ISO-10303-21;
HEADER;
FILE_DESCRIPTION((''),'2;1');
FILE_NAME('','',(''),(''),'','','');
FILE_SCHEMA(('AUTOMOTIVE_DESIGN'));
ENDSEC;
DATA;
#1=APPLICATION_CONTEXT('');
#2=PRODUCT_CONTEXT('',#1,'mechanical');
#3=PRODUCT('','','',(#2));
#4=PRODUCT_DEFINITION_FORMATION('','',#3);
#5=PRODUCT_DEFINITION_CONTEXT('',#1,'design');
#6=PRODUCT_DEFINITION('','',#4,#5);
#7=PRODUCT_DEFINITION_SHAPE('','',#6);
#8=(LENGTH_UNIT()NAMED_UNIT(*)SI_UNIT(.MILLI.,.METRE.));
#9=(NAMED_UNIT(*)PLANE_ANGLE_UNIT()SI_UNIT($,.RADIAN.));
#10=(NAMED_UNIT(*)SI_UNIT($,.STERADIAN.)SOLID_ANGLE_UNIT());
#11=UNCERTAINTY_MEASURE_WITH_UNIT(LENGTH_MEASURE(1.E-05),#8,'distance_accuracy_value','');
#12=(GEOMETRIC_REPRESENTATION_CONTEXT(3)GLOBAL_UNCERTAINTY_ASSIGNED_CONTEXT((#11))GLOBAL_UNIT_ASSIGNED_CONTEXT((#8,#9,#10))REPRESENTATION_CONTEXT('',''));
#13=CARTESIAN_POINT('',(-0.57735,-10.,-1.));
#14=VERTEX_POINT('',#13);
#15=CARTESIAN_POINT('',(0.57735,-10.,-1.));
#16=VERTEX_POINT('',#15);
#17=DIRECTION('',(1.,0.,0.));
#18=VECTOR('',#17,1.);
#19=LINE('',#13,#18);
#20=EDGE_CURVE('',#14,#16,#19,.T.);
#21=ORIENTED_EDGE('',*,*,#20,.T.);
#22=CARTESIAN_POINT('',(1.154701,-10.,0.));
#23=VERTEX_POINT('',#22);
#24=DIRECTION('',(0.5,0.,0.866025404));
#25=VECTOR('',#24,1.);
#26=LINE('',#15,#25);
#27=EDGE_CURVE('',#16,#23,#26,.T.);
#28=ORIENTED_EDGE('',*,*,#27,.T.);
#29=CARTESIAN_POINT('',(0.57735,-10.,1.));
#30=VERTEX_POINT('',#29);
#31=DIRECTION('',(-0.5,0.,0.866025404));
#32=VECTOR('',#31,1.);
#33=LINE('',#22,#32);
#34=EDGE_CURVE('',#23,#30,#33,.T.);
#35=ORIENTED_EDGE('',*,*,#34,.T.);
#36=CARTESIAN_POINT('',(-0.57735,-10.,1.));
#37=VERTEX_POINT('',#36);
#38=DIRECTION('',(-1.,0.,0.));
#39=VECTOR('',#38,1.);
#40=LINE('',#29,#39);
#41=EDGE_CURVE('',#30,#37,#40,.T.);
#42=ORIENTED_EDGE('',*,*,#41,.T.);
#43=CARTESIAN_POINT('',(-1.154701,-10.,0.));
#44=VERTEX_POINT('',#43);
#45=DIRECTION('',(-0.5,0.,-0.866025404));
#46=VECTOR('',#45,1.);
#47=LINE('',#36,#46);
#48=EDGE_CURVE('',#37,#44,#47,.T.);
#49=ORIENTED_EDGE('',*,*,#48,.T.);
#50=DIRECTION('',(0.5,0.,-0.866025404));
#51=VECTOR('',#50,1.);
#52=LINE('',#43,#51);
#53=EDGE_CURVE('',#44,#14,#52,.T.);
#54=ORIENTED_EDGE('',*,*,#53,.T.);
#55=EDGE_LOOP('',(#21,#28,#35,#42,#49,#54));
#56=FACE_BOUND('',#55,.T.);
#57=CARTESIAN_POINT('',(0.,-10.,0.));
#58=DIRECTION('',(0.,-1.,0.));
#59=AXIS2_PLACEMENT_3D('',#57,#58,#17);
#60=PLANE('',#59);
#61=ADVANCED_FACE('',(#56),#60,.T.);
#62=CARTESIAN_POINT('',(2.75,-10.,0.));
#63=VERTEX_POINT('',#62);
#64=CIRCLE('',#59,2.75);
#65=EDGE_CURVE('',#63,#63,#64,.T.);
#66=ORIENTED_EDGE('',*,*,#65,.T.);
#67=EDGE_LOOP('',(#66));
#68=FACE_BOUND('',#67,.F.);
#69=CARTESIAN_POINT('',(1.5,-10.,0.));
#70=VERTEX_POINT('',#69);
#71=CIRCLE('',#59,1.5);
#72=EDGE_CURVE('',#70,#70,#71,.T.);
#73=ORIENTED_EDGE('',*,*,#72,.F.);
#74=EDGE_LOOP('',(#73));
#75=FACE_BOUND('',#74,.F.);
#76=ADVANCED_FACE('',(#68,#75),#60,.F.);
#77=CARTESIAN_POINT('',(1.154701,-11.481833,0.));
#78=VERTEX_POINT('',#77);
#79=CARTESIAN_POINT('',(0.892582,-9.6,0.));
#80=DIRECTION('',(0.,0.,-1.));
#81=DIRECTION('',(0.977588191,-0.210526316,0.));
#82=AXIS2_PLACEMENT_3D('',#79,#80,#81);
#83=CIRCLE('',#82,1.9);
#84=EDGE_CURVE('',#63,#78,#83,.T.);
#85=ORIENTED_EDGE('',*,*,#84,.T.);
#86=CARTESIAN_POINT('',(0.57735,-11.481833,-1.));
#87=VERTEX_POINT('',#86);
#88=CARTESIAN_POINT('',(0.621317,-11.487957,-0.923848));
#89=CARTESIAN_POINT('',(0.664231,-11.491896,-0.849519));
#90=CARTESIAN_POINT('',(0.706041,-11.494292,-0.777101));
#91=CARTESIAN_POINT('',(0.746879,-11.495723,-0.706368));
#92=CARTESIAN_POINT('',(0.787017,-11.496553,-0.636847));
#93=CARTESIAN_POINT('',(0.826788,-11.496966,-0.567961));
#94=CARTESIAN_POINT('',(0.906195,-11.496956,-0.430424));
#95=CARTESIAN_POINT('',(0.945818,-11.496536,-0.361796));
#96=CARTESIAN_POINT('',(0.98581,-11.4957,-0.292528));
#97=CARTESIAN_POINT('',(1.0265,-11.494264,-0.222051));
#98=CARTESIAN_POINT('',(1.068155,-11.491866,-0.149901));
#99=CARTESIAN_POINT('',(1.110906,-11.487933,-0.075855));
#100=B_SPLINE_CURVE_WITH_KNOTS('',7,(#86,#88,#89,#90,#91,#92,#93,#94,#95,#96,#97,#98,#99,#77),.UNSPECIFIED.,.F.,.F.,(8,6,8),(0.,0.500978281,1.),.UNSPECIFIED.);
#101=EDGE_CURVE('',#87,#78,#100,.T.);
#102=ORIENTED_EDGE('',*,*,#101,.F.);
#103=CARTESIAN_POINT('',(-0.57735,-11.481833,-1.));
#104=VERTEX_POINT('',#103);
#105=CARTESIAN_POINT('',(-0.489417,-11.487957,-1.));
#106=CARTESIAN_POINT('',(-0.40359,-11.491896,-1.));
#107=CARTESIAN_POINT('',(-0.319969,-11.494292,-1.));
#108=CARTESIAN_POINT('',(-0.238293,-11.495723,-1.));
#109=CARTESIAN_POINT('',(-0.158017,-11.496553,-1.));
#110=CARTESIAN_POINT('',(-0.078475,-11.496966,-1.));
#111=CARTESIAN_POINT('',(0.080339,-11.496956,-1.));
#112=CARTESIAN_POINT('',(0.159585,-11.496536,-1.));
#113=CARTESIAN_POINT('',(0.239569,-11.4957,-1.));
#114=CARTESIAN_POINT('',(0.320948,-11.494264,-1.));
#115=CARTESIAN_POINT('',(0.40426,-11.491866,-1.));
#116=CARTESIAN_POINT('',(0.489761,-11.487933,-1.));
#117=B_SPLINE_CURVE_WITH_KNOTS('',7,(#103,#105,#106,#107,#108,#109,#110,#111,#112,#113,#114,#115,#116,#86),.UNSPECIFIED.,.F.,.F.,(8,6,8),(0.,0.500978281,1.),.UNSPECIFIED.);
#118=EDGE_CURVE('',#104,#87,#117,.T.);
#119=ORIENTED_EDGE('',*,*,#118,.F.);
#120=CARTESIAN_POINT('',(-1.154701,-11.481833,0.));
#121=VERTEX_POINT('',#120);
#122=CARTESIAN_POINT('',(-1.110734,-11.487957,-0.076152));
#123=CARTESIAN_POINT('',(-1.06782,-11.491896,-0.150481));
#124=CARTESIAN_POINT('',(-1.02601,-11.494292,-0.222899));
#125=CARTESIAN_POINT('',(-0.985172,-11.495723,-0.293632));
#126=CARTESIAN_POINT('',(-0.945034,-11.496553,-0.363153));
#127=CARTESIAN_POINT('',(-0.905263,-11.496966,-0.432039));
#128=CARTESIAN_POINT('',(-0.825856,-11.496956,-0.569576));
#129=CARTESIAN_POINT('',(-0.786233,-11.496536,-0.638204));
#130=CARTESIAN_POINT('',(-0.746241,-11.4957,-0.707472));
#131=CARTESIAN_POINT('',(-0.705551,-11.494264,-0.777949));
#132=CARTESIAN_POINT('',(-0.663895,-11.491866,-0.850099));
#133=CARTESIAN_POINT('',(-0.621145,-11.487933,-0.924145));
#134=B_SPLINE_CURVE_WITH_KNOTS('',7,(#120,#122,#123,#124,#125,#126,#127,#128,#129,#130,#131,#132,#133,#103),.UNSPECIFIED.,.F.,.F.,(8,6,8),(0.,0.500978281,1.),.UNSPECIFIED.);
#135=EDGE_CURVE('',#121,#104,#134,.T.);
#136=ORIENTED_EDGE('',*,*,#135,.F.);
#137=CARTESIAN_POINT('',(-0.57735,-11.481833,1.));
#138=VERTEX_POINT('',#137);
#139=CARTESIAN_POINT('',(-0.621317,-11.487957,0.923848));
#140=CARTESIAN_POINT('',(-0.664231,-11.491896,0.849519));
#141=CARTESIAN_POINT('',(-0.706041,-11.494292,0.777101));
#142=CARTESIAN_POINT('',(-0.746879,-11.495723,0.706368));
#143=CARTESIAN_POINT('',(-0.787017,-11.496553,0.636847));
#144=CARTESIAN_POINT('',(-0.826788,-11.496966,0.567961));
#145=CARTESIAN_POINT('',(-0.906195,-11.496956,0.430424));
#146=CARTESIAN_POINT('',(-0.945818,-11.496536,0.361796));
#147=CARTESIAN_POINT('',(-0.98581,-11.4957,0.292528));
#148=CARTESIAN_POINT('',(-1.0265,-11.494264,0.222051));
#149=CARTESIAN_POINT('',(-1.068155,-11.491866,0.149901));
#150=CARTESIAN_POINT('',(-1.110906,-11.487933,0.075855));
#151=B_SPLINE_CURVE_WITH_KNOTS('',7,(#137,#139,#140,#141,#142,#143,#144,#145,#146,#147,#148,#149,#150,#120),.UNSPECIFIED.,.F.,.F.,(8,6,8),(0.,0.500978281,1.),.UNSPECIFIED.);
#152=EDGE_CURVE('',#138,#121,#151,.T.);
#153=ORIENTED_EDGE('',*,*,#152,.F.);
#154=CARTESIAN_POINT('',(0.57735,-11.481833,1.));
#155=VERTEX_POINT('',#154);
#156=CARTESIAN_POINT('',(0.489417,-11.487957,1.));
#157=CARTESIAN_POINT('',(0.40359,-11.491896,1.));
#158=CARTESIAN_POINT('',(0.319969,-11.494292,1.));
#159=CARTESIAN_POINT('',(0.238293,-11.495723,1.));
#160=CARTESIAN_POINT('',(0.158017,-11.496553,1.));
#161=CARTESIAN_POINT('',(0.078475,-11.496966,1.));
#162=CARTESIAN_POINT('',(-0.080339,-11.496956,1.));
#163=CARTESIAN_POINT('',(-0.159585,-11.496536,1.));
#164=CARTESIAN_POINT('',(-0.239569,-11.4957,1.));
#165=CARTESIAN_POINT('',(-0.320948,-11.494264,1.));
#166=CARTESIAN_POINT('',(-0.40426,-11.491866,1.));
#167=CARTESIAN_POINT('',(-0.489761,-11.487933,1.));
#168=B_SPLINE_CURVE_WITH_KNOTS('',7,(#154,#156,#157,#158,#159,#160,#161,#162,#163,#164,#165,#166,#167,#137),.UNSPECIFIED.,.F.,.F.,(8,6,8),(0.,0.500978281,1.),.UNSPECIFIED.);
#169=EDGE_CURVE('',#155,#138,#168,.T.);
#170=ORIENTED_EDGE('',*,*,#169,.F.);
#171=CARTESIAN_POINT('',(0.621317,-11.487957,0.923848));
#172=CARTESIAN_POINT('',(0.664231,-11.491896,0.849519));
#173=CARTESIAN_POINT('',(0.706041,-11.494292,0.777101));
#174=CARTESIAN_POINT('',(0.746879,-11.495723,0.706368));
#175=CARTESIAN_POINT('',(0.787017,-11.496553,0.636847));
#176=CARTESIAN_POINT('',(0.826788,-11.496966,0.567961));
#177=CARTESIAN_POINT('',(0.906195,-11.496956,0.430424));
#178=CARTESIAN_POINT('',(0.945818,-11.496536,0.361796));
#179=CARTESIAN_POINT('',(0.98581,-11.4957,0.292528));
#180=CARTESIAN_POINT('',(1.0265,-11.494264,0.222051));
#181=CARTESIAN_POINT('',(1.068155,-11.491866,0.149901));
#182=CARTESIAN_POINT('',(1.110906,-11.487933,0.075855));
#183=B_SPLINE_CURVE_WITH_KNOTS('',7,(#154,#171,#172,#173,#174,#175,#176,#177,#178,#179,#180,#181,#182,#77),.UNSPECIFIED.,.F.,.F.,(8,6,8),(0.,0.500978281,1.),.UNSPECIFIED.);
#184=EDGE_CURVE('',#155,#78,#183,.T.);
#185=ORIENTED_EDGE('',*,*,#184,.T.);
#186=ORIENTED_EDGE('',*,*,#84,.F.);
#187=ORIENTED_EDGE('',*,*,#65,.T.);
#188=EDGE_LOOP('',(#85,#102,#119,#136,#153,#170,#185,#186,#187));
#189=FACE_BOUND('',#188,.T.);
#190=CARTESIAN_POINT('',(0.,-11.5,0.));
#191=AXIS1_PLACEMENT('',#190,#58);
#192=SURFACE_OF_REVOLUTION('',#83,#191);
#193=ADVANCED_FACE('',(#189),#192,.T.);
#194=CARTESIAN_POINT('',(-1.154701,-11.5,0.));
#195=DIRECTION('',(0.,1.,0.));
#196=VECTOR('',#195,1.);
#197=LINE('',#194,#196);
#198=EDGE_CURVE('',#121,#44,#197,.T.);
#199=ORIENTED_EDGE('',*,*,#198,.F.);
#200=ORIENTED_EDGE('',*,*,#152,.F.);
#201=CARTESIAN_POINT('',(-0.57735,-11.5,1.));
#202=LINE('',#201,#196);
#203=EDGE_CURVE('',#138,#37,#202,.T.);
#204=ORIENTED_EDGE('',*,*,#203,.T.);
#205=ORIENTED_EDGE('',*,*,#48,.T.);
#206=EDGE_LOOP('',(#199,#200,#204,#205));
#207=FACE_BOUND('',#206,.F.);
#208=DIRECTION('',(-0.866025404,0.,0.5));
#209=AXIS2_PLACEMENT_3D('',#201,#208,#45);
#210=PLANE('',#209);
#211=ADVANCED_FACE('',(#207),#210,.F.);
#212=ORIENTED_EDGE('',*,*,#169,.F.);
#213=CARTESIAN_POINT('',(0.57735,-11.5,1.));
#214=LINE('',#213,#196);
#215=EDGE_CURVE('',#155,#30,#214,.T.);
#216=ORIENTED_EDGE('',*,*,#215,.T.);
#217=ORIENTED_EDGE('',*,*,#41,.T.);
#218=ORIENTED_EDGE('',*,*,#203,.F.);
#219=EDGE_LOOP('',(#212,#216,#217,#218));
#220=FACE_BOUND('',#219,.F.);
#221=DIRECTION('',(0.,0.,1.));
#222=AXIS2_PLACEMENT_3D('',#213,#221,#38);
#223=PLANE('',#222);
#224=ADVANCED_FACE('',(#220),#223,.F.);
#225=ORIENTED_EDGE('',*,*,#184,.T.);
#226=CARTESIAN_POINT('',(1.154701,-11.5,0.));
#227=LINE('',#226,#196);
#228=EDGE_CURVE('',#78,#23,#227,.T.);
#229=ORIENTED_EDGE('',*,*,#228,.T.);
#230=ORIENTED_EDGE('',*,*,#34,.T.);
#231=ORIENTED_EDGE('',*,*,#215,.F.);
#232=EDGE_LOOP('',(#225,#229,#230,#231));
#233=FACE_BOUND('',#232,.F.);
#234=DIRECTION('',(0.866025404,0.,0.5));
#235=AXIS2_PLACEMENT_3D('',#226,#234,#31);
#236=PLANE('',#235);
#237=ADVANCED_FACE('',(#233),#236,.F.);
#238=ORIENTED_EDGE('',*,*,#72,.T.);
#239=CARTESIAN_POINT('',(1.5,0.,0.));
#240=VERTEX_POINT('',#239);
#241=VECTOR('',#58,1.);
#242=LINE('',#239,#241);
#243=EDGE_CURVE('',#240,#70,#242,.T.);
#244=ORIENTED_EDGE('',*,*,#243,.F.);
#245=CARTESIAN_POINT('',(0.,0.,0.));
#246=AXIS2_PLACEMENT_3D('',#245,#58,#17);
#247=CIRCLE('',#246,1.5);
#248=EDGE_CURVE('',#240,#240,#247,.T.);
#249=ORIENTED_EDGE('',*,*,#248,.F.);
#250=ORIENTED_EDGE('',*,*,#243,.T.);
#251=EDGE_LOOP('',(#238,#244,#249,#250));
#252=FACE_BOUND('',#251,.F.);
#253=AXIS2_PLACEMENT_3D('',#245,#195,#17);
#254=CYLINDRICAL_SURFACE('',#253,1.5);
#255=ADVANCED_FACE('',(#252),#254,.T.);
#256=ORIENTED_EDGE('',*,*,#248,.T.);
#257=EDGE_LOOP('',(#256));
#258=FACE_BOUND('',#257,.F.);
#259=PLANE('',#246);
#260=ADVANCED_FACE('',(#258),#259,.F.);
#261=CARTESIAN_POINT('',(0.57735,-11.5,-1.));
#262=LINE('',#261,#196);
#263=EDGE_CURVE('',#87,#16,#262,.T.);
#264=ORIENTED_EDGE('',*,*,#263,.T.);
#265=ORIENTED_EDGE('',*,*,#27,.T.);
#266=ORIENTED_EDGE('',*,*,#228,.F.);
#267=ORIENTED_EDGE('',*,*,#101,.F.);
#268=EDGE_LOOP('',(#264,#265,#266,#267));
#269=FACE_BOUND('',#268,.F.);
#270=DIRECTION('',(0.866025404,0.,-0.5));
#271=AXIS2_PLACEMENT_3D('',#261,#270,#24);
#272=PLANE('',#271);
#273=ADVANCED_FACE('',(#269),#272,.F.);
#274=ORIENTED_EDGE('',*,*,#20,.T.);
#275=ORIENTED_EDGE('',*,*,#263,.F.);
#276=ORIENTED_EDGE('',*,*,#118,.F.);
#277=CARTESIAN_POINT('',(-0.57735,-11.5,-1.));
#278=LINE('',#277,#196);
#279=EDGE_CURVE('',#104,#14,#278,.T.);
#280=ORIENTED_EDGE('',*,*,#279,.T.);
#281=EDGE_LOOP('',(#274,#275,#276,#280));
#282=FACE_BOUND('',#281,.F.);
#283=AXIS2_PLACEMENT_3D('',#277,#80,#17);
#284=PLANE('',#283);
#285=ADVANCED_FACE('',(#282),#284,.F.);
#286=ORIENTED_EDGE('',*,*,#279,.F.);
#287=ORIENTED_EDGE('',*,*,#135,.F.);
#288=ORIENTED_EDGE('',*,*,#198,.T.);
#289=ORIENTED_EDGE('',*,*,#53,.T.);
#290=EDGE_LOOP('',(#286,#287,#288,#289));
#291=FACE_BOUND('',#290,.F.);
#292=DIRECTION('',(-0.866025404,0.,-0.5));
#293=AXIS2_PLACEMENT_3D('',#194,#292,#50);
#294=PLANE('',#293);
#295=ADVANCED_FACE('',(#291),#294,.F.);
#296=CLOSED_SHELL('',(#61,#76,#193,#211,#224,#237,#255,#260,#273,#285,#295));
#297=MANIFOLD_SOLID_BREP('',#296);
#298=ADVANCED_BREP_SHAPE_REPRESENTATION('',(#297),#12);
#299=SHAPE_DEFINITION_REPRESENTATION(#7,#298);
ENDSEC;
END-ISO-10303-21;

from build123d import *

# Parameters (mm, degrees)
F0_R     = 1.5
F1_DEPTH = 10
F2_R     = 2.75
F3_DEPTH = 1.5
F5_DEPTH = 1.5


# Not quite as in the source:
# - a fillet or chamfer that OpenCascade refuses, or shapes differently, is made with other operations: its cross-section is extruded or revolved along the edge and cut away or added


with BuildPart() as f1:
    # F0 (on Front) → F1 (new body)
    with BuildSketch(Plane.XZ):
        Circle(F0_R)
    extrude(amount=F1_DEPTH)

    # F2 (on face) → F3 (join)
    with BuildSketch(Plane.XZ.offset(10)):
        Circle(F2_R)
    extrude(amount=F3_DEPTH)

    # F4 (on face) → F5 (cut)
    with BuildSketch(Plane.XZ.offset(11.5)):
        Polygon((-0.5773502692, -1), (0.5773502692, -1), (1.1547005384, 0), (0.5773502692, 1), (-0.5773502692, 1), (-1.1547005384, 0), align=None)
    extrude(amount=-F5_DEPTH, mode=Mode.SUBTRACT)

    # F6: fillet of radius 1.9 on 1 edges, made by hand

    # F6_s1 → F6_t2 (revolve, cut)
    with BuildSketch(Plane.XY):
        with BuildLine():
            ThreePointArc((2.75, -10), (2.0863160765, -11.0781745499), (0.8925824379, -11.5))
            Line((0.8925824379, -11.5), (2.75, -11.5))
            Line((2.75, -11.5), (2.75, -10))
        make_face()
    revolve(axis=Axis((0, -11.5, 0), (0, -1, 0)), mode=Mode.SUBTRACT)


solid = f1.part
